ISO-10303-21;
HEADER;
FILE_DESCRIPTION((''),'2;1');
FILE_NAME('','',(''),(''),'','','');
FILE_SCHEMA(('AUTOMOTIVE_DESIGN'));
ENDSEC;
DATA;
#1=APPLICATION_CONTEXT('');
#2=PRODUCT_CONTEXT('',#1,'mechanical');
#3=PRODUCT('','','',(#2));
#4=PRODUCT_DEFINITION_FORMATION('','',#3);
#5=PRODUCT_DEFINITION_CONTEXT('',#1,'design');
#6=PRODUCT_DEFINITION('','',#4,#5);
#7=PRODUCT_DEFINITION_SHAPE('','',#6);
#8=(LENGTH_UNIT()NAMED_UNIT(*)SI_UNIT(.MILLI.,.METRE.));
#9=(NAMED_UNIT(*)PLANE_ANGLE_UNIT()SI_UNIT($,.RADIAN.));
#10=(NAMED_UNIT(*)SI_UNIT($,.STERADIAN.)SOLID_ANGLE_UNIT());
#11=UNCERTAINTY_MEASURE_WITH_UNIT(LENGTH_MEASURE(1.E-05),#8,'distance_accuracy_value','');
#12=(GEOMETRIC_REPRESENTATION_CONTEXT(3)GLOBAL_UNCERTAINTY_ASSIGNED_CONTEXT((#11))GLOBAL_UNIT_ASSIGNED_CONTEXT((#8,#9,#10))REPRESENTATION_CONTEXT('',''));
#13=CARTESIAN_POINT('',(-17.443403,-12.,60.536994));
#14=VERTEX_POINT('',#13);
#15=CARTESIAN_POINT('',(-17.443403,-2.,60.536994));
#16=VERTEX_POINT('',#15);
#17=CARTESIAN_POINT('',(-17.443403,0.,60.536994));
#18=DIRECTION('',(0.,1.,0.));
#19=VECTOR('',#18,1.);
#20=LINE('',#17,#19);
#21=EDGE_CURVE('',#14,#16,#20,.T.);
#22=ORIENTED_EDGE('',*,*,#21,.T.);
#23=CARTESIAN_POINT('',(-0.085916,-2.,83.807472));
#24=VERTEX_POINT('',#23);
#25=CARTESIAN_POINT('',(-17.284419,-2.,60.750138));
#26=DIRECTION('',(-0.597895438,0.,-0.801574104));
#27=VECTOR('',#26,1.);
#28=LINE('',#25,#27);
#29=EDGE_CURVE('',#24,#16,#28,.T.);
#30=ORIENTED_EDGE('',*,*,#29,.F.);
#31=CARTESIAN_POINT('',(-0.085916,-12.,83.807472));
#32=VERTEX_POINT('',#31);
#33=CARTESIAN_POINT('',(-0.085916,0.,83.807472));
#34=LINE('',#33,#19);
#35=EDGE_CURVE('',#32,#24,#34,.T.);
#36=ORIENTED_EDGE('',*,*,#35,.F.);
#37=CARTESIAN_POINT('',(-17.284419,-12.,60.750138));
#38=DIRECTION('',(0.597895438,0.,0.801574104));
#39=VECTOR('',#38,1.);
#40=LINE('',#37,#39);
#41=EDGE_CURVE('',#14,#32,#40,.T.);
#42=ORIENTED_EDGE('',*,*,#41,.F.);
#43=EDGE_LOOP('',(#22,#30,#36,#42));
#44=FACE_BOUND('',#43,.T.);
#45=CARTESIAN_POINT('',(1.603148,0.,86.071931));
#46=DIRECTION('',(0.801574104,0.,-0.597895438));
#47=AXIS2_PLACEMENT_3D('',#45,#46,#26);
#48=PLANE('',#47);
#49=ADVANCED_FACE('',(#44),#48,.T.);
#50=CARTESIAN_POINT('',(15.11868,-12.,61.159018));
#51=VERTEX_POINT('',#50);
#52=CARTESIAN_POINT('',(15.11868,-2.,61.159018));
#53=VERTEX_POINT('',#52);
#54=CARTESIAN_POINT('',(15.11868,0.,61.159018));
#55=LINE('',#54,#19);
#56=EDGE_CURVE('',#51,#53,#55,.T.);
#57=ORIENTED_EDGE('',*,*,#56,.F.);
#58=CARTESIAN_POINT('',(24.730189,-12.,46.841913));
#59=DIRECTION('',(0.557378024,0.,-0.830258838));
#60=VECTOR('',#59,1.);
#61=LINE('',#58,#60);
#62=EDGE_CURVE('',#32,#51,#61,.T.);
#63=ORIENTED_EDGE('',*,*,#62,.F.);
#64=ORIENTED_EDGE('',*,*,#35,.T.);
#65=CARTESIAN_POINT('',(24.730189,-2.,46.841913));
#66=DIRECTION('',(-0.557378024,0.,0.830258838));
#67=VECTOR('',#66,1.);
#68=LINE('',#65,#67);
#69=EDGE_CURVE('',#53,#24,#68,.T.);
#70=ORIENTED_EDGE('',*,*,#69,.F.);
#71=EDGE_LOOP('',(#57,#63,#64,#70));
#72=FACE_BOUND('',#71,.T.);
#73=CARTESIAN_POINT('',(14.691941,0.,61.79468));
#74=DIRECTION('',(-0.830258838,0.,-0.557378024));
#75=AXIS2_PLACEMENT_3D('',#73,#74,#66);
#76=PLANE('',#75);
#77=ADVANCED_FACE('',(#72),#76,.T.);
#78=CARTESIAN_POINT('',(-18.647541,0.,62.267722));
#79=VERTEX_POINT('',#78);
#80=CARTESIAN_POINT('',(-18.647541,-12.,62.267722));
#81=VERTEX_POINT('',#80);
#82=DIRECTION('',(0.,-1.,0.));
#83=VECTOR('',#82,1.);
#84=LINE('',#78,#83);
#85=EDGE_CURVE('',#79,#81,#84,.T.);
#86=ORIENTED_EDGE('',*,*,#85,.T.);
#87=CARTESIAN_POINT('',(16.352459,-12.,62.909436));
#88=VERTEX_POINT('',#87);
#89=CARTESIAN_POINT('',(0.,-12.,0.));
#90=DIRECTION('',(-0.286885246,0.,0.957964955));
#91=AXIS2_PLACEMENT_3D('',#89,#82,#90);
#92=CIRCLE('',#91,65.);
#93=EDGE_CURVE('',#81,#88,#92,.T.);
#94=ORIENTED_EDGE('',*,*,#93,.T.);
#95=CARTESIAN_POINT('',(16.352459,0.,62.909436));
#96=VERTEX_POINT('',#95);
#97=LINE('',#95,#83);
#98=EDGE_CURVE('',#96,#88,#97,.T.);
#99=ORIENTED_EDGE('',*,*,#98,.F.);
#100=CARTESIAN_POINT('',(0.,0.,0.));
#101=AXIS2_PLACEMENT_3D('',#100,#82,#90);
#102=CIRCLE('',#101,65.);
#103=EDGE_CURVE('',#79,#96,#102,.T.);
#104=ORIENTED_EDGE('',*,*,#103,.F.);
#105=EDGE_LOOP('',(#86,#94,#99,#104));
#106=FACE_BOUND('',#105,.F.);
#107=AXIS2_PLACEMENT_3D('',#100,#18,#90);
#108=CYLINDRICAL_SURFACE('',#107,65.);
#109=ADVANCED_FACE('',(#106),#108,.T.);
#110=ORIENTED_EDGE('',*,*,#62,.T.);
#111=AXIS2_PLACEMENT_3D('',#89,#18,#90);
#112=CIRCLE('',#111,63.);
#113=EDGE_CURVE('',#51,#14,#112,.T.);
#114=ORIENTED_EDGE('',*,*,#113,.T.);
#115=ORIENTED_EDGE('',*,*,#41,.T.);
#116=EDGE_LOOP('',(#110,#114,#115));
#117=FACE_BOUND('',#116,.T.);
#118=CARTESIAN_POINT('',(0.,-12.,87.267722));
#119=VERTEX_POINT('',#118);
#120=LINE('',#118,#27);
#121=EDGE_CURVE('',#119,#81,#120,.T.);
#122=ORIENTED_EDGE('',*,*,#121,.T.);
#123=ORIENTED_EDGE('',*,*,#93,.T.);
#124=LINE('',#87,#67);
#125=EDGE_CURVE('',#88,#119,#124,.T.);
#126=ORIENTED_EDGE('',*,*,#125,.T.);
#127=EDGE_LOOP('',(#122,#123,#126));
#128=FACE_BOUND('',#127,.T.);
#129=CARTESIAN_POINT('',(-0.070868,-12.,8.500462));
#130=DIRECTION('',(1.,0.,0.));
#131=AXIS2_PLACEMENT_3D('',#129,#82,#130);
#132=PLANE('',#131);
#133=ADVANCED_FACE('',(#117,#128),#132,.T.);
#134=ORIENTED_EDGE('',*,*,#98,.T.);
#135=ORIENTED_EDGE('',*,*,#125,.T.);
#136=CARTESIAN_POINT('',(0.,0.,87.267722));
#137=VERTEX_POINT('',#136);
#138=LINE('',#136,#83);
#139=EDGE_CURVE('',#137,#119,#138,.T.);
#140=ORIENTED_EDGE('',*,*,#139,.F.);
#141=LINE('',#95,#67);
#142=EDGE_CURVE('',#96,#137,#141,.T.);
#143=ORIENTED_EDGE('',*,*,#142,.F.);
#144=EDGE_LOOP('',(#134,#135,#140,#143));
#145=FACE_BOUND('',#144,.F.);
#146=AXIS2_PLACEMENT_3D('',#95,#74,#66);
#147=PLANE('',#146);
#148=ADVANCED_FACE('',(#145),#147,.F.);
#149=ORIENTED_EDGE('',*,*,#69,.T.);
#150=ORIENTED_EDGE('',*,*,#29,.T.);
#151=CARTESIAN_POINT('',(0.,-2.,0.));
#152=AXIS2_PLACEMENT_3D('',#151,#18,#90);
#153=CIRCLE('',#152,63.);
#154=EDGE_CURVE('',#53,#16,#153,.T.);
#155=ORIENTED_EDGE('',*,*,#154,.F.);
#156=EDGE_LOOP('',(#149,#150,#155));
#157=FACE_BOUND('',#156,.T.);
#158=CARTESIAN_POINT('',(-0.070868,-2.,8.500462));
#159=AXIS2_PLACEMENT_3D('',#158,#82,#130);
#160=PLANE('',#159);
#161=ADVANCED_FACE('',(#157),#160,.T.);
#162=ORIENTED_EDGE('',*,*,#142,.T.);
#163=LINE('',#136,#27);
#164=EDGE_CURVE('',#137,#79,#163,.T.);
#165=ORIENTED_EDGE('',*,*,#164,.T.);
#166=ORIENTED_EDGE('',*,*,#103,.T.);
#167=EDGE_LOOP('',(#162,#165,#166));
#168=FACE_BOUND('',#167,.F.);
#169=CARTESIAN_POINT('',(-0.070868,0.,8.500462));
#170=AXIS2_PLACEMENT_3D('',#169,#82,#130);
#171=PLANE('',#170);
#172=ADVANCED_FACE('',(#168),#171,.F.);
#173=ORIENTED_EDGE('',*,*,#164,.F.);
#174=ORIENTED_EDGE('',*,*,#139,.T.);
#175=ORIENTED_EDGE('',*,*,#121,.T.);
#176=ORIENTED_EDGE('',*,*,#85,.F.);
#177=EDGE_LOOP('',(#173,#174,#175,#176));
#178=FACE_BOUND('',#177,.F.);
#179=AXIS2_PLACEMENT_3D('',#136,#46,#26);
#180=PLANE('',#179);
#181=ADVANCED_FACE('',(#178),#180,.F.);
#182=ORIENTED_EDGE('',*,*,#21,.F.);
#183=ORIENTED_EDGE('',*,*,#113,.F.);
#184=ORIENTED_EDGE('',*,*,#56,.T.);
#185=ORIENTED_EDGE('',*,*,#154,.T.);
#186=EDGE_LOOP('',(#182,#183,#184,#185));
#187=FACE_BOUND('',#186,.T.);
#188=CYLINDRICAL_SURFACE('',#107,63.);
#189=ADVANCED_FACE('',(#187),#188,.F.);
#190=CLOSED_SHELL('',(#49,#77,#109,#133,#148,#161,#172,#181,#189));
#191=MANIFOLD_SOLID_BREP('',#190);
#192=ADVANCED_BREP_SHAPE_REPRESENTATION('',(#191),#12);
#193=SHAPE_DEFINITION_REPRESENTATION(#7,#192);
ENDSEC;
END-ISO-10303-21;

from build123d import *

# Parameters (mm, degrees)
F1_DEPTH = 12
F2_T     = -2


with BuildPart() as f1:
    # F0 (on Front) → F1 (new body)
    with BuildSketch(Plane.XZ):
        with BuildLine():
            Line((0, 87.2677220979), (-18.6475409836, 62.2677220979))
            ThreePointArc((-18.6475409836, 62.2677220979), (1.1915533371, -64.9890775488), (16.3524590164, 62.909435573))
            Line((16.3524590164, 62.909435573), (0, 87.2677220979))
        make_face()
    extrude(amount=F1_DEPTH)

    # F2
    f2_openings = [f1.faces().sort_by_distance(p)[0] for p in [
        (-0.019386, -12, 1.977046),
    ]]
    offset(amount=F2_T, openings=f2_openings, kind=Kind.INTERSECTION)


solid = f1.part
